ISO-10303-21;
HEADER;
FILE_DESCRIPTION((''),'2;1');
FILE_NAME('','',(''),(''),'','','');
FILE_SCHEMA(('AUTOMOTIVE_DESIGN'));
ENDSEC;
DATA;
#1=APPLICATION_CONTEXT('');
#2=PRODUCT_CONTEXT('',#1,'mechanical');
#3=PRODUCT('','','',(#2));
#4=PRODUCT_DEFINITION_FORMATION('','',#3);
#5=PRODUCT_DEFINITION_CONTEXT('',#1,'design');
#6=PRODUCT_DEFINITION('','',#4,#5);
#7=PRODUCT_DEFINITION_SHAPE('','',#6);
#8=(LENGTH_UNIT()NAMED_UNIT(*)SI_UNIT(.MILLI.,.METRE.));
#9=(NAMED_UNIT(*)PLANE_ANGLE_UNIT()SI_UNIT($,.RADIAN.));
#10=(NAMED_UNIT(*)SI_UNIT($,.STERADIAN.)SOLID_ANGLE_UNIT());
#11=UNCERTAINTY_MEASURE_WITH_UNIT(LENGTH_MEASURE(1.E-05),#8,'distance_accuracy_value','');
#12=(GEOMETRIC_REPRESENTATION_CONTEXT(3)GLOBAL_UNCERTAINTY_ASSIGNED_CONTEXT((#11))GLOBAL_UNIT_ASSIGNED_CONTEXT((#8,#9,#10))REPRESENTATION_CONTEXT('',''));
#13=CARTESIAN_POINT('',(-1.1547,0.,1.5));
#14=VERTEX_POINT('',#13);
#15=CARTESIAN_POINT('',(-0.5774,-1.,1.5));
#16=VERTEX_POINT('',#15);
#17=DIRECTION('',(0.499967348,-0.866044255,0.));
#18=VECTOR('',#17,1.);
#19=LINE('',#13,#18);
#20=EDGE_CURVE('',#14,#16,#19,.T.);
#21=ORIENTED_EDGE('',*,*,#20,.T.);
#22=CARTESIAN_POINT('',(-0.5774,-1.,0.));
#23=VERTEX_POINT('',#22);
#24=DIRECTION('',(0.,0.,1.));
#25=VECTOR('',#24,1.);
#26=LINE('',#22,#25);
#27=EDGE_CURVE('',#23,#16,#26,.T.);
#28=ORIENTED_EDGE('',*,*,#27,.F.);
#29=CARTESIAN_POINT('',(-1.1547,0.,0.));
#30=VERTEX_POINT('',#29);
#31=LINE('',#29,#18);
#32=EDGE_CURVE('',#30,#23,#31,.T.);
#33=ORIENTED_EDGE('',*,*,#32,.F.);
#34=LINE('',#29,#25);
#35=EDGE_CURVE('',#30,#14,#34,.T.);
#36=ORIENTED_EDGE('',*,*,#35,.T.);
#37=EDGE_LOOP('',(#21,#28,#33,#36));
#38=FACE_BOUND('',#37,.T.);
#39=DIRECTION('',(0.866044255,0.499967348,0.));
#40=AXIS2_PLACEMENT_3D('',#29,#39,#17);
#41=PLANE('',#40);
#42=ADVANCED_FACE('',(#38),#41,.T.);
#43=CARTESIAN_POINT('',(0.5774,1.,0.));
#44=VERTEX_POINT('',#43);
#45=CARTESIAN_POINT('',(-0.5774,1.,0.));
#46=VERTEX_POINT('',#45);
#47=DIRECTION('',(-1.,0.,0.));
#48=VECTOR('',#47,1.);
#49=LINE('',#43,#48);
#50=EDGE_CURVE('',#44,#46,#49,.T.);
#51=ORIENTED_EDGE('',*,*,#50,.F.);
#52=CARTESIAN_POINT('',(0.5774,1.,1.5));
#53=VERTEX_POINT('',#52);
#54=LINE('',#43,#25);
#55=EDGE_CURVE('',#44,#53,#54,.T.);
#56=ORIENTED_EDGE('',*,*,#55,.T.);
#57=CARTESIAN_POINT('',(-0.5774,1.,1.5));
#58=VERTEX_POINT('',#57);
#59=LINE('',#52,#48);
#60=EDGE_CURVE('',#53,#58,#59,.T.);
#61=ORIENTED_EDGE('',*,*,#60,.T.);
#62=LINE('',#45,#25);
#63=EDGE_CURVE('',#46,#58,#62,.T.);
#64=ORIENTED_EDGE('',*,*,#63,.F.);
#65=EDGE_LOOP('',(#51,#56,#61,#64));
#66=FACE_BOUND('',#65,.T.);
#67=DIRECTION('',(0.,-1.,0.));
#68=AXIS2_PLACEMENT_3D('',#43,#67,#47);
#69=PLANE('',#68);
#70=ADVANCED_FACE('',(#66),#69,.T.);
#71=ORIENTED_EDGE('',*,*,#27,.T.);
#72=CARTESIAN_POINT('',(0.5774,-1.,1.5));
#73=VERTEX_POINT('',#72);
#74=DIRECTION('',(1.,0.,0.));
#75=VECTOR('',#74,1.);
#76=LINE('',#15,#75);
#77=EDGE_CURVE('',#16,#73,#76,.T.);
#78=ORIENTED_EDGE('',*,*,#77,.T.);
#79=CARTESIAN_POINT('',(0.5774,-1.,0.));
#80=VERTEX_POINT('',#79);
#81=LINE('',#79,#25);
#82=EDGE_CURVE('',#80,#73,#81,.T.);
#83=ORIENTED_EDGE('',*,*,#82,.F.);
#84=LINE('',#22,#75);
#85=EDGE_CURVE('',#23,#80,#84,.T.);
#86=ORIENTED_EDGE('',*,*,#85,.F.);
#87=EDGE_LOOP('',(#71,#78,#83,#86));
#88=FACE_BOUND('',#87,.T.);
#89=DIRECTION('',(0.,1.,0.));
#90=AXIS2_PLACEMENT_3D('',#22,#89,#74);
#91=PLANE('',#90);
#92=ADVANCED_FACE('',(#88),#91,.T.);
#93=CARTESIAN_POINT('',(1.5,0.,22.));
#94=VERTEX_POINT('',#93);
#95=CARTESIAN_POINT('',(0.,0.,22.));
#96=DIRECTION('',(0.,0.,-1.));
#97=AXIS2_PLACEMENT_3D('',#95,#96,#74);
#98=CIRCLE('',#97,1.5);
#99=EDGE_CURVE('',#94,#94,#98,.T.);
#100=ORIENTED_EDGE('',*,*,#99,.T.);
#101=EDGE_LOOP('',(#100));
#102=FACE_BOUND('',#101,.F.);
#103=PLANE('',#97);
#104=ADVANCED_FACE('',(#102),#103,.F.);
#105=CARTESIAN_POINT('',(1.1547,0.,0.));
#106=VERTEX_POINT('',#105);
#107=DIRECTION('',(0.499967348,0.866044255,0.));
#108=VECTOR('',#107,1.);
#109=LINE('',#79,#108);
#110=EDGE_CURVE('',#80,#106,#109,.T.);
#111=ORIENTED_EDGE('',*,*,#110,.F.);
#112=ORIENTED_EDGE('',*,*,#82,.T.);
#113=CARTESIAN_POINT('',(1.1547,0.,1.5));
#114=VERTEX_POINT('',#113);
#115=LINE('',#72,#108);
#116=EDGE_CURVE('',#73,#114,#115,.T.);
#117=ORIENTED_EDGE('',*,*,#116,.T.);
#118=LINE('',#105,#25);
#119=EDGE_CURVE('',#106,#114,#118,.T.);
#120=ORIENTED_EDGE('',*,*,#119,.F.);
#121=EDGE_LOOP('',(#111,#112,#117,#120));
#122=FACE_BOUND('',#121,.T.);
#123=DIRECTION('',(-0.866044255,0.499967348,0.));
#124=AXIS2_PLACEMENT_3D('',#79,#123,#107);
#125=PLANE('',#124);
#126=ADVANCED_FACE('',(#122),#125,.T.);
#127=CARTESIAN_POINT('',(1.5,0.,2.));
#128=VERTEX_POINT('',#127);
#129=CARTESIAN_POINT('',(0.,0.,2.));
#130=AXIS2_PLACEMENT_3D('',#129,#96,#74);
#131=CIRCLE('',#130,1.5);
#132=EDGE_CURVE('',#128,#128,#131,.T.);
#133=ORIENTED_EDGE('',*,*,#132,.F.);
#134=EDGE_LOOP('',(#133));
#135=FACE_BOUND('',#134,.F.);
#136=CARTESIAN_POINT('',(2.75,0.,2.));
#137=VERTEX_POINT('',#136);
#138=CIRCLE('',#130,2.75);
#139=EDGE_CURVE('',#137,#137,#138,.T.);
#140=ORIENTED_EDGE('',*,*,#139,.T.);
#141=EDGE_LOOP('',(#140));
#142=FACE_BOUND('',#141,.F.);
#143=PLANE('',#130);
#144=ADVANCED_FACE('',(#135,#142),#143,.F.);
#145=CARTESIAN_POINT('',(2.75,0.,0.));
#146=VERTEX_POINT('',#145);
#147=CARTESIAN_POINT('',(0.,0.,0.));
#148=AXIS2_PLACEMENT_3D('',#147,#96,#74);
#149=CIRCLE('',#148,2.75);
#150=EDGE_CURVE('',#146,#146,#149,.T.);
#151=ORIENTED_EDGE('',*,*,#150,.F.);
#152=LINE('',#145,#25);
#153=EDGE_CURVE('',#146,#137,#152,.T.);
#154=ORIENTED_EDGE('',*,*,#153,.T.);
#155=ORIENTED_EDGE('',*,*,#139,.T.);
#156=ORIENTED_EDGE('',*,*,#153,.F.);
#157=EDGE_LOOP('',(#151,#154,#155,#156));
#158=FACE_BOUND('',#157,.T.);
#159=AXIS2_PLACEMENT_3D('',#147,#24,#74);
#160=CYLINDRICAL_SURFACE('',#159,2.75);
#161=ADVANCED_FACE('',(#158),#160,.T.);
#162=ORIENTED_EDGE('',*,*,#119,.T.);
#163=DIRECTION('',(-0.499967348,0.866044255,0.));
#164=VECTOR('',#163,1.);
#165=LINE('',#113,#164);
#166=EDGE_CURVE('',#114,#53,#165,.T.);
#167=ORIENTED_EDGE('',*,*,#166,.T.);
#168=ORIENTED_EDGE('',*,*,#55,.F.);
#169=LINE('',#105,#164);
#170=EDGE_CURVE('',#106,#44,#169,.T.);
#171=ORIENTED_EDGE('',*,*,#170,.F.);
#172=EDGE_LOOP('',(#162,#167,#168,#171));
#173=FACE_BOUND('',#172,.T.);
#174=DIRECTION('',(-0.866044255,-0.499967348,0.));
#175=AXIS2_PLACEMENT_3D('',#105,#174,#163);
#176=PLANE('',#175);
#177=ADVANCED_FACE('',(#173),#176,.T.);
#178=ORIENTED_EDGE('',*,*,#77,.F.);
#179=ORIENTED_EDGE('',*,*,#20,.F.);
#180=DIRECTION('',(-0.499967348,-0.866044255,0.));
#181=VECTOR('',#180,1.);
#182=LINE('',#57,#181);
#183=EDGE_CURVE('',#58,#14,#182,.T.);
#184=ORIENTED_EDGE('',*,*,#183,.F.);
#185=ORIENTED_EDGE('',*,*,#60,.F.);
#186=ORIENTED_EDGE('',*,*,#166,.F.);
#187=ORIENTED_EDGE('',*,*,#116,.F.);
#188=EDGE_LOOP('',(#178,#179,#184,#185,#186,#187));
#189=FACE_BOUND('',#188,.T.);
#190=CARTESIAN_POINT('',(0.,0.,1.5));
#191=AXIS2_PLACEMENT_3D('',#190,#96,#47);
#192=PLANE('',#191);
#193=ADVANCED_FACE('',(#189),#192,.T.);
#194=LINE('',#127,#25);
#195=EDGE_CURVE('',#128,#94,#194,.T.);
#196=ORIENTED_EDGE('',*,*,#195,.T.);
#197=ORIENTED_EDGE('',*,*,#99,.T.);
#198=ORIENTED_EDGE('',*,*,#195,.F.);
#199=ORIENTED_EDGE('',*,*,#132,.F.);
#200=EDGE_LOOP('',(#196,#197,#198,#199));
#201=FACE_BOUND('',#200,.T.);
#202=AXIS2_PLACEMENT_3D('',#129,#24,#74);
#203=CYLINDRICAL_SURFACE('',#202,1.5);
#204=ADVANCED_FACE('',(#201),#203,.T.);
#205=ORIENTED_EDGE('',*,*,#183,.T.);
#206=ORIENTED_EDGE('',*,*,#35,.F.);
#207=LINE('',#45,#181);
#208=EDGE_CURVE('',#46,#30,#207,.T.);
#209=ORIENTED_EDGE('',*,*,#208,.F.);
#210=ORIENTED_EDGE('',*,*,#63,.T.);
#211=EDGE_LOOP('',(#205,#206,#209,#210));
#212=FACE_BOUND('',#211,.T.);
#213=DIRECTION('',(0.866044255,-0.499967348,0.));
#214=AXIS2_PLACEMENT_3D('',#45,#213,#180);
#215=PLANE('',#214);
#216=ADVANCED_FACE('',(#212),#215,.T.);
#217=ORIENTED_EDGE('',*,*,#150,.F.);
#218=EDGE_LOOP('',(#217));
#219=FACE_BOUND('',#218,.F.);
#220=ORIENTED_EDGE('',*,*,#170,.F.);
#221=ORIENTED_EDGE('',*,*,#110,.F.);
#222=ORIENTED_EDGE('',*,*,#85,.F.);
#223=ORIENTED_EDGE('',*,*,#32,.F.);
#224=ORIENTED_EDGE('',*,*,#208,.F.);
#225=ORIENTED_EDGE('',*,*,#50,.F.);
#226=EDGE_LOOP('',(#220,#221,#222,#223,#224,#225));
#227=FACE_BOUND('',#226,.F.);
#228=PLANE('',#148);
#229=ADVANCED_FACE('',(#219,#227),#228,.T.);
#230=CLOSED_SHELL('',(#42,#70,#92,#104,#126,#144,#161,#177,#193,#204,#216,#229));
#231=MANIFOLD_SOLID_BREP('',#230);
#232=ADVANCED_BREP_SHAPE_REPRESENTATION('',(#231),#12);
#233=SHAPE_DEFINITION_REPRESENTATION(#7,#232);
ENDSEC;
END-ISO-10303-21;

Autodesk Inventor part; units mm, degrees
ref_plane "YZ Plane" through (0, 0, 0) normal (1, 0, 0) x (0, 1, 0)
ref_plane "XZ Plane" through (0, 0, 0) normal (0, 1, 0) x (-1, 0, 0)
ref_plane "XY Plane" through (0, 0, 0) normal (0, 0, 1) x (1, 0, 0)
sketch "Sketch1" plane through (0, 0, 0) normal (0, 1, 0) x (-1, 0, 0)
  line L0 (0, 0) -> (-2.75, 0)
  line L1 (-2.75, 0) -> (-2.75, 2)
  line L2 (-2.75, 2) -> (-1.5, 2)
  line L3 (-1.5, 2) -> (-1.5, 22)
  line L4 (-1.5, 22) -> (0, 22)
  line L5 (0, 22) -> (0, 0)
  dimension "ScrewLength" = 20
  dimension "Diameter" = 5.5
  dimension "Metric" = 3
  dimension "HeadLength" = 2
revolve "Revolution1" add sketch "Sketch1" angle 360 about axis through (0, 0, 22) along (0, 0, -1)
thread "Thread1" size "M3x0.5" class "6g" standard "ANSI Metric M Profile" length 18
sketch "Sketch2" plane through (0, 0, 0) normal (0, 0, -1) x (-1, 0, 0)
  line L0 (0.5774, 1) -> (1.1547, 0)
  line L1 (1.1547, 0) -> (0.5774, -1)
  line L2 (0.5774, -1) -> (-0.5774, -1)
  line L3 (-0.5774, -1) -> (-1.1547, 0)
  line L4 (-1.1547, 0) -> (-0.5774, 1)
  line L5 (-0.5774, 1) -> (0.5774, 1)
  point P0 (0, 0)
  point P1 (0, 0)
  dimension "WidthAcrossFlat" = 2
extrude "Extrusion1" cut sketch "Sketch2" against normal blind 1.5
properties part number "ULC-0320" material "Stainless Steel AISI 304"
